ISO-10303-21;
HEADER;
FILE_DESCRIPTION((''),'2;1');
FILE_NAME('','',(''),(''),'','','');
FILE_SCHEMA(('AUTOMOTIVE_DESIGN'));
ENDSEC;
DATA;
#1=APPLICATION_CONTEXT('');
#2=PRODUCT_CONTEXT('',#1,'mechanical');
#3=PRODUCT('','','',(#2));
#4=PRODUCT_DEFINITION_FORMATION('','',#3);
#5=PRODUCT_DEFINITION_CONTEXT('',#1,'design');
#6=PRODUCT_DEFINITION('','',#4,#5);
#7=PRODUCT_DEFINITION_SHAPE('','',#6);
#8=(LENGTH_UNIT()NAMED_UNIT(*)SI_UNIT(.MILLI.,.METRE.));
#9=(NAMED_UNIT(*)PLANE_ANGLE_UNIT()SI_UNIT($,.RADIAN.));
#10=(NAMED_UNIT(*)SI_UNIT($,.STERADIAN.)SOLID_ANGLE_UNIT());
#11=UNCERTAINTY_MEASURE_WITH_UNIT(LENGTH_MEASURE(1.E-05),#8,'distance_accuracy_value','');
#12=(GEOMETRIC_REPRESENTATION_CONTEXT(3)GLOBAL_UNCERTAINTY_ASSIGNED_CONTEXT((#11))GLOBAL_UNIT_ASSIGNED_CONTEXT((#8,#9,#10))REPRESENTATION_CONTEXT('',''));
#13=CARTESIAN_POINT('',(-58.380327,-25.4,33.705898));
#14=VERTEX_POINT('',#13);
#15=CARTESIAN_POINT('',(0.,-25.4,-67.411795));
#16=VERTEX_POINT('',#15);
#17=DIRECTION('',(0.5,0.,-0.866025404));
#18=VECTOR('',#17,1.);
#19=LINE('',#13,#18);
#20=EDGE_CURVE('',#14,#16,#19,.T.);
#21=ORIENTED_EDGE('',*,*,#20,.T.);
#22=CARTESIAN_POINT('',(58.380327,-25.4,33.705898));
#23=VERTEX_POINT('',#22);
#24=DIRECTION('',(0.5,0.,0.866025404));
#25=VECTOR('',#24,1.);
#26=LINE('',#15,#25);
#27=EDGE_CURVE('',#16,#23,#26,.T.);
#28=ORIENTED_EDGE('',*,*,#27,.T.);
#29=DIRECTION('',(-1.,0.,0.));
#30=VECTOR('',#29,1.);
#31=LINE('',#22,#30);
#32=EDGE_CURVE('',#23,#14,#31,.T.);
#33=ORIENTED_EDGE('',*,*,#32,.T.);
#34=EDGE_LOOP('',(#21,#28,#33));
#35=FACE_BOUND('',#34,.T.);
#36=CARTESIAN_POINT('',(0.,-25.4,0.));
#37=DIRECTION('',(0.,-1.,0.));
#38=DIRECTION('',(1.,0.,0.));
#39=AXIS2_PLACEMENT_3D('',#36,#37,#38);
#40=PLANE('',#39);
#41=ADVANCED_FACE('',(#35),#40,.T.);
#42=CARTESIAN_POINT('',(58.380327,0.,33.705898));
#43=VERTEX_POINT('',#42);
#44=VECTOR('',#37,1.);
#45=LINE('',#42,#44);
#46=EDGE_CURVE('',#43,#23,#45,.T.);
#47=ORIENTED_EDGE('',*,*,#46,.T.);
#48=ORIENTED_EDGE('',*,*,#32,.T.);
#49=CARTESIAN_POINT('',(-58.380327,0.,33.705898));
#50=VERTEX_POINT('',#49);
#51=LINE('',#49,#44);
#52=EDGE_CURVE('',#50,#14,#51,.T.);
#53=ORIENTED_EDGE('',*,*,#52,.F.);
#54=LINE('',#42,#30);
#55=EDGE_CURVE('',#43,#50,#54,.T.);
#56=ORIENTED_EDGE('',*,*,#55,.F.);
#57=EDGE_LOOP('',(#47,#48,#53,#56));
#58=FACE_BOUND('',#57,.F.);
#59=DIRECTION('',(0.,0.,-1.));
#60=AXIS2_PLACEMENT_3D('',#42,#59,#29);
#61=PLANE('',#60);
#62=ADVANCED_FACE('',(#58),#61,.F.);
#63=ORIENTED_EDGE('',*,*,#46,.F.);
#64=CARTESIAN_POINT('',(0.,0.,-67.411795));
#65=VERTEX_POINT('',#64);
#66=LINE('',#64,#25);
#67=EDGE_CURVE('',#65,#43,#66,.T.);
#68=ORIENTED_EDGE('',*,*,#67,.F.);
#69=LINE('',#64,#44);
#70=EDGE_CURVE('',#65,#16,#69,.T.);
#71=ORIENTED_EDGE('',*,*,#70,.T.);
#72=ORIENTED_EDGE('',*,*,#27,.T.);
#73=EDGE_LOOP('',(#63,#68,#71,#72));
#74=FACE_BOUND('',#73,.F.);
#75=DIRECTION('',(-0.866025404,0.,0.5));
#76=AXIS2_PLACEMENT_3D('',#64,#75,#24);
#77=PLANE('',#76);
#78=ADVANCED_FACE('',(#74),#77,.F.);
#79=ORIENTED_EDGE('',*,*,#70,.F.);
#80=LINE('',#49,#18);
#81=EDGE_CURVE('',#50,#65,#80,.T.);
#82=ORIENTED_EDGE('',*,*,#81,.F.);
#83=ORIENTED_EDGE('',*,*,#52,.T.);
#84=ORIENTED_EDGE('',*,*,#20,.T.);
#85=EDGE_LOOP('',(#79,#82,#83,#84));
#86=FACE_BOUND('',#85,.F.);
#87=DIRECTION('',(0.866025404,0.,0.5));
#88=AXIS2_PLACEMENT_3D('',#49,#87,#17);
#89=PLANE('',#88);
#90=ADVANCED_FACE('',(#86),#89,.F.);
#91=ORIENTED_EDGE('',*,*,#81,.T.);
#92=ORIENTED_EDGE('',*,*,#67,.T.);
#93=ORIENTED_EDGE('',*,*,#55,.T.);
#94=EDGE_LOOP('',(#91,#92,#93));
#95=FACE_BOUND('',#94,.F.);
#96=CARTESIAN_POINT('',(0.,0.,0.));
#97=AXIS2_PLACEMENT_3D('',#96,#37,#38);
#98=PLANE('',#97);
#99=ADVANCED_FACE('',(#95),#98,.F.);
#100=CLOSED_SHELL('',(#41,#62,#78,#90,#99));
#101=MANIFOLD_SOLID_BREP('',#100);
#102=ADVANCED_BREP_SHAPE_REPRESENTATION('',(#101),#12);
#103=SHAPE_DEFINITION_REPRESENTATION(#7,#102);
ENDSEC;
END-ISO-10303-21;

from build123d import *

# Parameters (mm, degrees)
F1_DEPTH = 25.4


# Not quite as in the source:
# - the program builds the solid bodies; features that only make, move or delete a surface that nothing else refers to are left out


with BuildPart() as f1:
    # F0 (on Front) → F1 (new body)
    with BuildSketch(Plane.XZ):
        Polygon((-58.3803272086, 33.7058976293), (0, -67.4117952585), (58.3803272086, 33.7058976293), align=None)
    extrude(amount=F1_DEPTH)


solid = f1.part
